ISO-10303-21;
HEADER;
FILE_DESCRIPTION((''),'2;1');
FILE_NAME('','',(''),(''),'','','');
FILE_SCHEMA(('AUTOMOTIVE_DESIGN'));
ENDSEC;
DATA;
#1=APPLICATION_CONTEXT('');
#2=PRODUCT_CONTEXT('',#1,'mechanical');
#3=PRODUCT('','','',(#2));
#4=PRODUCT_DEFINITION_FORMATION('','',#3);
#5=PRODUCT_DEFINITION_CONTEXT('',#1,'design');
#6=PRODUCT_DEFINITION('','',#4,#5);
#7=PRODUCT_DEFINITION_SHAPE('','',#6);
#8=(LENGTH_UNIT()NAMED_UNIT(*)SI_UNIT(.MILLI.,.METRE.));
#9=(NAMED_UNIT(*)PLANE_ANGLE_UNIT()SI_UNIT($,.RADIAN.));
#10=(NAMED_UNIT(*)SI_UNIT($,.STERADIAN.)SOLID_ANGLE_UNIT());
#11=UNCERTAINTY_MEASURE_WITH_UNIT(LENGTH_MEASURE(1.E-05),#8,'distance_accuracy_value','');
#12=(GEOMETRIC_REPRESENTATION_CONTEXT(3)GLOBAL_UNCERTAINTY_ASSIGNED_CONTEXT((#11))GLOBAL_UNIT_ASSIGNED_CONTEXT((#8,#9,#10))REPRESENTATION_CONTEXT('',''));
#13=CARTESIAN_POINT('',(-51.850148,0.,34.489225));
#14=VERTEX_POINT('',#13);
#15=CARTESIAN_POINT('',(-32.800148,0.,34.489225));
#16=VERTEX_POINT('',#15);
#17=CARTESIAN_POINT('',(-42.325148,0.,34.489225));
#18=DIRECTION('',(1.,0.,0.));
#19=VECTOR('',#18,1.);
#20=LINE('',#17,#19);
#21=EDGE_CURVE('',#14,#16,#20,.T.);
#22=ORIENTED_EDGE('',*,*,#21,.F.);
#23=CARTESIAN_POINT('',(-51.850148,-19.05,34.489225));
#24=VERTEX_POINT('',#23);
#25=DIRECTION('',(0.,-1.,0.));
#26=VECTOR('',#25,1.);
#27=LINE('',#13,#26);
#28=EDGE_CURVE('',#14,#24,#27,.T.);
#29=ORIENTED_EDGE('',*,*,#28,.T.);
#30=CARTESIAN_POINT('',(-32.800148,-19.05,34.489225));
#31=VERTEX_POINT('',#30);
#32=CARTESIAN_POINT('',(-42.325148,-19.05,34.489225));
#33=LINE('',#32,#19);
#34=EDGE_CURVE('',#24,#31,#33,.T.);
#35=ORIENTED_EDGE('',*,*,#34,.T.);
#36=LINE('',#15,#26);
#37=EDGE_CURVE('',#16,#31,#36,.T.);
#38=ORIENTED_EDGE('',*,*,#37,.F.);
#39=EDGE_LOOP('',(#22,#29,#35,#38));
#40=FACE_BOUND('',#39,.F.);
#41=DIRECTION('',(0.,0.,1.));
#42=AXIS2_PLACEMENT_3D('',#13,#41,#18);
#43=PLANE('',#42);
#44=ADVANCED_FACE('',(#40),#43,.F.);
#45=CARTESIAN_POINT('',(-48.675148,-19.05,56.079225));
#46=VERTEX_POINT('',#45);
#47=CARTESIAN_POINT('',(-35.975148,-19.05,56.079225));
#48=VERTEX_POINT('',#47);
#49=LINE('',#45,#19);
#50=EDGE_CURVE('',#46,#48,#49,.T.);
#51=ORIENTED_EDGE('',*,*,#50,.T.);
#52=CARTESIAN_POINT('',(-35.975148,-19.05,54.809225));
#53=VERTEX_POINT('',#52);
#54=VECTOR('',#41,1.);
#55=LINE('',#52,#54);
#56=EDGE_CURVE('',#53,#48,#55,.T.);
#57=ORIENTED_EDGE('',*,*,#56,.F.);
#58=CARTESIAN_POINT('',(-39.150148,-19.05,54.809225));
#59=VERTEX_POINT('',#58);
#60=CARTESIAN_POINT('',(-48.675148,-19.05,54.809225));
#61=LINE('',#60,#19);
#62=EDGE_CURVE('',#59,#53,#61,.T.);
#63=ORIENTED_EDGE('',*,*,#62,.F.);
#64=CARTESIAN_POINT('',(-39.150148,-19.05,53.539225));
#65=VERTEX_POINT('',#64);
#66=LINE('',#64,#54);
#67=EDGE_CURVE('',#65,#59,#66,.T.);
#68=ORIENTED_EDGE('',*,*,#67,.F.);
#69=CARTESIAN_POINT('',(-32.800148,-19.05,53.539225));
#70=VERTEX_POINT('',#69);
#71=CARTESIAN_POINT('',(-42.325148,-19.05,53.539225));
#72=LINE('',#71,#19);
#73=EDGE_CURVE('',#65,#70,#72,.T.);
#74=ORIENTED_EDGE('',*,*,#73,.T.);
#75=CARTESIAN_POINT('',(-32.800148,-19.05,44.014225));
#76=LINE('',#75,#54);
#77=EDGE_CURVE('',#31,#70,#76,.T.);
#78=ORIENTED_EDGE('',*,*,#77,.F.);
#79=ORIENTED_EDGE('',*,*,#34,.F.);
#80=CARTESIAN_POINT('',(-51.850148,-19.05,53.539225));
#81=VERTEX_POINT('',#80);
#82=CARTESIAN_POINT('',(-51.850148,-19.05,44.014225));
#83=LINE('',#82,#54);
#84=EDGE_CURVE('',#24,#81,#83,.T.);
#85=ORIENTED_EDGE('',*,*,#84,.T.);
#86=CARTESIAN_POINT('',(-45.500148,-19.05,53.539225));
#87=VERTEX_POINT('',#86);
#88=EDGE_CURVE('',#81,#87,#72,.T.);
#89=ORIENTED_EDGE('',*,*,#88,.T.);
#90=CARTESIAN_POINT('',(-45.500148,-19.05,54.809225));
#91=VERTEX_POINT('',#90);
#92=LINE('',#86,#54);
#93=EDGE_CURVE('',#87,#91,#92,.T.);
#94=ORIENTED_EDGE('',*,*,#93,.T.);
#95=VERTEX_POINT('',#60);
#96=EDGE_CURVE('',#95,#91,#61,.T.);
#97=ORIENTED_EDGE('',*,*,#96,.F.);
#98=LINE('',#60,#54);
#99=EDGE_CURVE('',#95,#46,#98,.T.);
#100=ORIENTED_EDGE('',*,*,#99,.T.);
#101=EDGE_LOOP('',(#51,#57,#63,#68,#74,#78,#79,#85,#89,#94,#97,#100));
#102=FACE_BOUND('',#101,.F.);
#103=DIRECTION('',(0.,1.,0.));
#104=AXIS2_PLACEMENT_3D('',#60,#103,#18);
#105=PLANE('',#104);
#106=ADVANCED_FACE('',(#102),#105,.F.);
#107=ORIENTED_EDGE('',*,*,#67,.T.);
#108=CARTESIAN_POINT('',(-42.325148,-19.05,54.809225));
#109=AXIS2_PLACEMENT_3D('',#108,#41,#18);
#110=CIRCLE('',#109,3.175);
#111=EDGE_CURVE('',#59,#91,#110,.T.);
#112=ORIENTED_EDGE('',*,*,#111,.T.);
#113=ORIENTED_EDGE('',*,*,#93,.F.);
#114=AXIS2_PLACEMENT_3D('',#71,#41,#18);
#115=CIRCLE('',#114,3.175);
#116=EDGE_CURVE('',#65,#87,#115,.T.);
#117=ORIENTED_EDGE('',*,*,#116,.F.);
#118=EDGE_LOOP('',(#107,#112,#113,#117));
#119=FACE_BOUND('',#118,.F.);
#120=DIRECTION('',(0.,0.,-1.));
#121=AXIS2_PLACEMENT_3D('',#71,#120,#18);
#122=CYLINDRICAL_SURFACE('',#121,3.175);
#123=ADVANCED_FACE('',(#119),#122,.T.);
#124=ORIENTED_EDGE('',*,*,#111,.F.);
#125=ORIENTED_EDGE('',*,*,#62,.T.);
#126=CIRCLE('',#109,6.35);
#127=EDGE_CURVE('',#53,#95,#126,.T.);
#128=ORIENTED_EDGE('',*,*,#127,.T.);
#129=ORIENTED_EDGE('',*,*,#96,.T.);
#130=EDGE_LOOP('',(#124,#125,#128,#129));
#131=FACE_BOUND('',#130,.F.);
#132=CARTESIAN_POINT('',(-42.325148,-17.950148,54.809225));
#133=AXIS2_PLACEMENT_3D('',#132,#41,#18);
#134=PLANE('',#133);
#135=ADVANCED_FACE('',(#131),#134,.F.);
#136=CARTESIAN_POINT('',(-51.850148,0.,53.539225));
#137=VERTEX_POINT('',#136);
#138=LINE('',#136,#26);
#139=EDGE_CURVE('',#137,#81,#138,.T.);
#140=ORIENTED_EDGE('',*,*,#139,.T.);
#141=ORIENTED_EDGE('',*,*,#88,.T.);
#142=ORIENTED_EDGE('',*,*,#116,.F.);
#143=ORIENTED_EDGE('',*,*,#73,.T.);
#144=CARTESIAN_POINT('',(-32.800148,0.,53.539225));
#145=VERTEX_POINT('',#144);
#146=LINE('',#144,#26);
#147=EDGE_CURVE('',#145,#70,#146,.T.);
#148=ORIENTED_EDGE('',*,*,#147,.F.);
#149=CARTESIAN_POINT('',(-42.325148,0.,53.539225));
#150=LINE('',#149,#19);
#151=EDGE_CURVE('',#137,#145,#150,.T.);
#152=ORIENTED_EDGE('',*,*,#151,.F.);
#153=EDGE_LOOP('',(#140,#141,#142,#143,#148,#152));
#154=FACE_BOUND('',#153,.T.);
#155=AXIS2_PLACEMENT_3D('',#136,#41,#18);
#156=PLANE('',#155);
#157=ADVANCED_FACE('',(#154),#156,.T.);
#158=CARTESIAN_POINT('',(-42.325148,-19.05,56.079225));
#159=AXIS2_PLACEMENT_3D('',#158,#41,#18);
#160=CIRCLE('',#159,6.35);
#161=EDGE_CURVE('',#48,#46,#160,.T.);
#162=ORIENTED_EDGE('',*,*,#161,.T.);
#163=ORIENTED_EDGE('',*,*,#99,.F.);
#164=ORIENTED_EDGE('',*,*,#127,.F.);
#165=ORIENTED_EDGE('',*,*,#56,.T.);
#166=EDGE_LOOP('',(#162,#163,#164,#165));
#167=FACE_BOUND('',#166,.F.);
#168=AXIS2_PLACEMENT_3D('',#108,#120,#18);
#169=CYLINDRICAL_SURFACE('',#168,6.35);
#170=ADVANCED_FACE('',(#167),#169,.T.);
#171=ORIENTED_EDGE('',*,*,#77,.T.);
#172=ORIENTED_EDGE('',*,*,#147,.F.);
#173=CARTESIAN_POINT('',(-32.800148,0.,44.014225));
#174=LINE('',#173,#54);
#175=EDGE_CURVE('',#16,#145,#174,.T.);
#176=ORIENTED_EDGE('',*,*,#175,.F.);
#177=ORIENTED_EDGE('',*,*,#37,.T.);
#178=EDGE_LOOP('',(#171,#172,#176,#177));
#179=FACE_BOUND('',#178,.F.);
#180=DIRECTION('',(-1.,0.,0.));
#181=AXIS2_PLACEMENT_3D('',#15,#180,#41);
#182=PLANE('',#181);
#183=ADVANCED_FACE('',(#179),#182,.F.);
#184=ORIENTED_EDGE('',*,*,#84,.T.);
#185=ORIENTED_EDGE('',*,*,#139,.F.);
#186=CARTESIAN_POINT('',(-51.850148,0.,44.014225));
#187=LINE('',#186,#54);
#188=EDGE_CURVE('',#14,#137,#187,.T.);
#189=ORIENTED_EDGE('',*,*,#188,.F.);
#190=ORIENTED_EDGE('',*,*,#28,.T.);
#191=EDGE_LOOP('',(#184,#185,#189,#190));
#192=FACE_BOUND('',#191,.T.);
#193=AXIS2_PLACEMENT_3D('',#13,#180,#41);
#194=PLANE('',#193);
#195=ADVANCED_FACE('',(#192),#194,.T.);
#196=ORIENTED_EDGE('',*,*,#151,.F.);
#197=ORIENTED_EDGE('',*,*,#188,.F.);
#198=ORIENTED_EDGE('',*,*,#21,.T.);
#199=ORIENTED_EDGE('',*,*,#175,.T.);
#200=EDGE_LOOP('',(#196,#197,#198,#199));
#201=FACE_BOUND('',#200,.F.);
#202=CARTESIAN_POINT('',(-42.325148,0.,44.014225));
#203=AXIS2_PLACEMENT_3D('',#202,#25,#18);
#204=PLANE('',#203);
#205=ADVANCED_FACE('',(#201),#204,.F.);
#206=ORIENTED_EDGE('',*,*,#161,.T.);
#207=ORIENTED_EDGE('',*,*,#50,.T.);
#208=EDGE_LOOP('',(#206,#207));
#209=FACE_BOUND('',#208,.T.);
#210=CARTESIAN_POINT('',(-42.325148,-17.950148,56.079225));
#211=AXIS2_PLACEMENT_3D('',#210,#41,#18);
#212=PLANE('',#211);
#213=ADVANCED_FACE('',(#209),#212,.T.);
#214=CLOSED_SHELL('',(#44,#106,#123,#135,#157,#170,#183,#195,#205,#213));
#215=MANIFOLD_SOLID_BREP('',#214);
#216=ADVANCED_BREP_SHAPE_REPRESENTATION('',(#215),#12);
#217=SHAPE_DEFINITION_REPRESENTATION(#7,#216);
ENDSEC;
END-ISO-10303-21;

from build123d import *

# Parameters (mm, degrees)
F0_W     = 19.05
F0_H     = 19.05
F1_DEPTH = 19.05
F3_DEPTH = 1.27
F5_DEPTH = 1.27


with BuildPart() as f1:
    # F0 (on Front) → F1 (new body)
    with BuildSketch(Plane.XZ):
        with Locations((-42.3251483589, 44.0142245242)):
            Rectangle(F0_W, F0_H)
    extrude(amount=F1_DEPTH)

    # F2 (on face) → F3 (join)
    with BuildSketch(Plane.XY.offset(53.5392245242)):
        with BuildLine():
            Line((-45.5001483589, -19.05), (-39.1501483589, -19.05))
            ThreePointArc((-39.1501483589, -19.05), (-42.3251483589, -15.875), (-45.5001483589, -19.05))
        make_face()
    extrude(amount=F3_DEPTH)

    # F4 (on face) → F5 (join)
    with BuildSketch(Plane.XY.offset(54.8092245242)):
        with BuildLine():
            Line((-45.5001483589, -19.05), (-39.1501483589, -19.05))
            ThreePointArc((-39.1501483589, -19.05), (-42.3251483589, -15.875), (-45.5001483589, -19.05))
        make_face()
        with BuildLine():
            Line((-39.1501483589, -19.05), (-35.9751483589, -19.05))
            ThreePointArc((-35.9751483589, -19.05), (-42.3251483589, -12.7), (-48.6751483589, -19.05))
            Line((-48.6751483589, -19.05), (-45.5001483589, -19.05))
            ThreePointArc((-45.5001483589, -19.05), (-42.3251483589, -15.875), (-39.1501483589, -19.05))
        make_face()
    extrude(amount=F5_DEPTH)


solid = f1.part
